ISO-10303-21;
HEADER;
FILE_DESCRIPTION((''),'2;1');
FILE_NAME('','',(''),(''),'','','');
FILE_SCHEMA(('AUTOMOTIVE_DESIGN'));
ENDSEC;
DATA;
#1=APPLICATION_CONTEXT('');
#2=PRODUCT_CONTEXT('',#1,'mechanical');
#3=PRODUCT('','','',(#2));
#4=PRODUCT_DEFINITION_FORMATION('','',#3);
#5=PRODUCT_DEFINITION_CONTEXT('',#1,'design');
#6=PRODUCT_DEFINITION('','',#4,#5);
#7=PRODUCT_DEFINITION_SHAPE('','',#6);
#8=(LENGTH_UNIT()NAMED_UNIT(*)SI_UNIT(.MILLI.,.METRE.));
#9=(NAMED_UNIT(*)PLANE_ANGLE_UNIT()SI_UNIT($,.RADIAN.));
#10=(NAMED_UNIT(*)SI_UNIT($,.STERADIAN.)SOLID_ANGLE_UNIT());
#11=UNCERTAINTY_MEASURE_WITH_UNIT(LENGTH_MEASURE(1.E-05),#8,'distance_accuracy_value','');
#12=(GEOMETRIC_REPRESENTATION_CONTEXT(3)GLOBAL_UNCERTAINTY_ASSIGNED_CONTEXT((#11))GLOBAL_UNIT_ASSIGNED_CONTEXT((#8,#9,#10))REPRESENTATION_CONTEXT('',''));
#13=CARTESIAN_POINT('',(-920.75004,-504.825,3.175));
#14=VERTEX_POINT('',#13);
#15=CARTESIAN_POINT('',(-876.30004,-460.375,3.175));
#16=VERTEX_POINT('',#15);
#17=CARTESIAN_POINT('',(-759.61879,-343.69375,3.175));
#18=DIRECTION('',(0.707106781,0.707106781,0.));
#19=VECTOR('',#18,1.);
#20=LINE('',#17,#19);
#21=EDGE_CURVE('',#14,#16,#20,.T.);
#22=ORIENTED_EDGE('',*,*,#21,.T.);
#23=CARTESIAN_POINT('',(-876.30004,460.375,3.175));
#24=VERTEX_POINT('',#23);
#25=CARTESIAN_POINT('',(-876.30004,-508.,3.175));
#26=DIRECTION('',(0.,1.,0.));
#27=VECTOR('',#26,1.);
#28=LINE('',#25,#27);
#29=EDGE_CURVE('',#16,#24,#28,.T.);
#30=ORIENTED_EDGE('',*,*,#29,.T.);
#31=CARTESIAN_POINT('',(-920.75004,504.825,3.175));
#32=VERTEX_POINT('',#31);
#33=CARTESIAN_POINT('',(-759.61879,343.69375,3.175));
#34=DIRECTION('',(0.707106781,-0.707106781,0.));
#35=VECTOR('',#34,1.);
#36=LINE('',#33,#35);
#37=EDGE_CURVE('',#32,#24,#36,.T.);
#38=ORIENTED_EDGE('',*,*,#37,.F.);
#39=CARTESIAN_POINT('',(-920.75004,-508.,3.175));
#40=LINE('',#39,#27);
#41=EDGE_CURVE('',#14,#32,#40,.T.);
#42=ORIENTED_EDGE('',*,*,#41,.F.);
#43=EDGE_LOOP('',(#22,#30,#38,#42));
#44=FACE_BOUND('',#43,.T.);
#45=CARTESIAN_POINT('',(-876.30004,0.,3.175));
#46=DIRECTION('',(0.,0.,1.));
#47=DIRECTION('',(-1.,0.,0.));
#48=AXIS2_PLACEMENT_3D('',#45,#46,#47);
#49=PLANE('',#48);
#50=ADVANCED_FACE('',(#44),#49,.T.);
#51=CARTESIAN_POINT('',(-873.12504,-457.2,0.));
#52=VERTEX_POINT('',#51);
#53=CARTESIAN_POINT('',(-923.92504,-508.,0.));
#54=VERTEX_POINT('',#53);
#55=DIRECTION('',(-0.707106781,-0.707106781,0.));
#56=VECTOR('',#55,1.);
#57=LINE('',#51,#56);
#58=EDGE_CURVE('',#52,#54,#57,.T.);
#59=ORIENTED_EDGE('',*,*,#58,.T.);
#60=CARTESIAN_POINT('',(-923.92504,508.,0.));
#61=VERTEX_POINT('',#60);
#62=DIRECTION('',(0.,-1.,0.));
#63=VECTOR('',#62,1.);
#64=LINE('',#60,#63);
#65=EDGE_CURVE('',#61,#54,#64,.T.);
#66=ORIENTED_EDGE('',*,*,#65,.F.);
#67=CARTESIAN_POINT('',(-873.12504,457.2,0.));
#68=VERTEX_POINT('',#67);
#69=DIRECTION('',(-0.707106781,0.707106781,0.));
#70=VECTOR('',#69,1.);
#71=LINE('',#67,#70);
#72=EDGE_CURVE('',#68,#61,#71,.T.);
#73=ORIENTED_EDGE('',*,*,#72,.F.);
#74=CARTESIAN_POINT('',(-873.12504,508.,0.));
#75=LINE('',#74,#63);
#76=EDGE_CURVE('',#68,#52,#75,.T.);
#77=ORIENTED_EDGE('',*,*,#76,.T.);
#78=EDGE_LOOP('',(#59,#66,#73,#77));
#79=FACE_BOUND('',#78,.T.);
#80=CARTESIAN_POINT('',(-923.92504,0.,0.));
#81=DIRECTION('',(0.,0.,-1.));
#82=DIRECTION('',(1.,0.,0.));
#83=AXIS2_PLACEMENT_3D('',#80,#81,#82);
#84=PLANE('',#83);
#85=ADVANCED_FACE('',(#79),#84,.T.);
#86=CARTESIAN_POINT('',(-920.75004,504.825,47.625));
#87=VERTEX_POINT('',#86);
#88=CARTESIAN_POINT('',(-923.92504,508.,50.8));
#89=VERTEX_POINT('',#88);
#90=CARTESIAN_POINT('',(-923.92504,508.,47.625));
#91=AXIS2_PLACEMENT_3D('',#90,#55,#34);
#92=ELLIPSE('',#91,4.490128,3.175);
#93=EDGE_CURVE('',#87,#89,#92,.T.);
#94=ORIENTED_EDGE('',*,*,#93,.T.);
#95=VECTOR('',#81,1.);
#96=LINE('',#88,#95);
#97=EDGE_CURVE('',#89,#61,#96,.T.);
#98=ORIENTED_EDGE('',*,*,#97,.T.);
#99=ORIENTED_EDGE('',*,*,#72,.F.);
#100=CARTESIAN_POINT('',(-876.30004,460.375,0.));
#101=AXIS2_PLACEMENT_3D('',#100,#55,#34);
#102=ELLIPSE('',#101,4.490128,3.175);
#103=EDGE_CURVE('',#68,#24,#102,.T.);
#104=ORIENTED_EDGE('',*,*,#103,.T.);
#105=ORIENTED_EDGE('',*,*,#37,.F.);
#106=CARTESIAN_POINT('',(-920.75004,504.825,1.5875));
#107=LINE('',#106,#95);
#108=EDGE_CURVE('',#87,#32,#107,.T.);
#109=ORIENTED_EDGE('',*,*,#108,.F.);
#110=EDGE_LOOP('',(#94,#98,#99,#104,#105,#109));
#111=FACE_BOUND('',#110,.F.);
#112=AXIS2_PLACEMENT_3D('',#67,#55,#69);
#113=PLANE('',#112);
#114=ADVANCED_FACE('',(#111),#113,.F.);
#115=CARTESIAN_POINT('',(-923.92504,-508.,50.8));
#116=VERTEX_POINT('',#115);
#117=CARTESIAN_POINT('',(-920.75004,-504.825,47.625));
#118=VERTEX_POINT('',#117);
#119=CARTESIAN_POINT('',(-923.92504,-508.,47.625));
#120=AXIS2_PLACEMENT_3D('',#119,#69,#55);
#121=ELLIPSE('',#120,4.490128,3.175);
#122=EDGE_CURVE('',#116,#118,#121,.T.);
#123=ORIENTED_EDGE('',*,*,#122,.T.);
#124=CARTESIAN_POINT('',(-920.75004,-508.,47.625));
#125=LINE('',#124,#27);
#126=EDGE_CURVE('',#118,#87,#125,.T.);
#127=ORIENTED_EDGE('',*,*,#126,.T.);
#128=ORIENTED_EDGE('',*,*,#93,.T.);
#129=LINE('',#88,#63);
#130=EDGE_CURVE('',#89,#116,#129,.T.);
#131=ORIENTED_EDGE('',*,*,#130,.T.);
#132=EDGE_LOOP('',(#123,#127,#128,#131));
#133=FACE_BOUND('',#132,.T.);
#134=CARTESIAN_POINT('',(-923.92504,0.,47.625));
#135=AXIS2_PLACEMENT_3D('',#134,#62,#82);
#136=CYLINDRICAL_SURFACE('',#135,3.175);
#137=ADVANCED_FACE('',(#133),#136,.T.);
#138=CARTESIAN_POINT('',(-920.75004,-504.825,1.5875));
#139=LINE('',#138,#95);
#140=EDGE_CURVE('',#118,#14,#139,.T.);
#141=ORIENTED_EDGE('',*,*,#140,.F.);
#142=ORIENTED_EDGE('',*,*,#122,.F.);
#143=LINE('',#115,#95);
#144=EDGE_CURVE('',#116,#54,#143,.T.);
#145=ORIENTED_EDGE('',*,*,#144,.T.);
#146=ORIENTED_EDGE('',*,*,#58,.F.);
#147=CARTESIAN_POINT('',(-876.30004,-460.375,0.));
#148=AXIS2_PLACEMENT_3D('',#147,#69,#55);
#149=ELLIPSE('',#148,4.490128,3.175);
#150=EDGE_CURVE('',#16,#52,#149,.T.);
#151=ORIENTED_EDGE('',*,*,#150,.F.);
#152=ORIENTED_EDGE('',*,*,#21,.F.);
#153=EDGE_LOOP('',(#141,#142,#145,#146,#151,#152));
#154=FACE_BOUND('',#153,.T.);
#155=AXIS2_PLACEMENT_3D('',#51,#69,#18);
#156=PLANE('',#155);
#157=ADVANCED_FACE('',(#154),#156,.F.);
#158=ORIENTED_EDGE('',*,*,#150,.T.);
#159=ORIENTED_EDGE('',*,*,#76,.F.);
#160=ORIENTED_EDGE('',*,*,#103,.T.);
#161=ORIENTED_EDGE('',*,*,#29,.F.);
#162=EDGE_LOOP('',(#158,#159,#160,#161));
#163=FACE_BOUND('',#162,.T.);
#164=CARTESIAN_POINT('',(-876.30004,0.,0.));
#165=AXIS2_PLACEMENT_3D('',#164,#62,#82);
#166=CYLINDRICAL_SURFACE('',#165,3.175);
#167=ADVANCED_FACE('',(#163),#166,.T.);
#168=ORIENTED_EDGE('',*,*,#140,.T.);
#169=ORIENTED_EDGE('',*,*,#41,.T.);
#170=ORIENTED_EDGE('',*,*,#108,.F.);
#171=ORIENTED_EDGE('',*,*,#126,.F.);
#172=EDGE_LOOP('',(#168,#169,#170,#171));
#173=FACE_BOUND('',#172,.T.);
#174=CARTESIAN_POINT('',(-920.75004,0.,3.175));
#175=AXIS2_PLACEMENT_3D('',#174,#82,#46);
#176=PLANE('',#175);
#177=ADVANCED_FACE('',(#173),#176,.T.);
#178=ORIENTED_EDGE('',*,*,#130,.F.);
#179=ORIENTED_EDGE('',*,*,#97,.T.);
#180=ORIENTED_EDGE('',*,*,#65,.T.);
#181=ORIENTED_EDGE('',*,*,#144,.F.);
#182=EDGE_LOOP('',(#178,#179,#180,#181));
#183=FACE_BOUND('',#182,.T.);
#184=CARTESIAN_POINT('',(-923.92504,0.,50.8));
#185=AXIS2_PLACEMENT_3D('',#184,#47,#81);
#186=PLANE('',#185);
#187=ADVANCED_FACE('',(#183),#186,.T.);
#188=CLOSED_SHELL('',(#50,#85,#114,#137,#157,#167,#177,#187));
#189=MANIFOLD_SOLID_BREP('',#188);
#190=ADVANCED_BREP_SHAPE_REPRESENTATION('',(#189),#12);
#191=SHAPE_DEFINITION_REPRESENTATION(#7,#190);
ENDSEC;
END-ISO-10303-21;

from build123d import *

# Parameters (mm, degrees)
F1_DEPTH = 508
F3_DEPTH = 50.8


# Not quite as in the source:
# - a pattern or mirror of a feature is missing from the dataset's text; its kind, count and spacing are read off the source's solid


with BuildPart() as f1:
    # F0 (on Front) → F1 (new body, symmetric)
    with BuildSketch(Plane.XZ):
        with BuildLine():
            ThreePointArc((-920.7500404358, 47.625), (-921.6799764055, 49.8700640303), (-923.9250404358, 50.8))
            Line((-923.9250404358, 50.8), (-923.9250404358, 0))
            Line((-923.9250404358, 0), (-873.1250404358, 0))
            ThreePointArc((-873.1250404358, 0), (-874.0549764055, 2.2450640303), (-876.3000404358, 3.175))
            Line((-876.3000404358, 3.175), (-920.7500404358, 3.175))
            Line((-920.7500404358, 3.175), (-920.7500404358, 47.625))
        make_face()
    extrude(amount=F1_DEPTH, both=True)

    # F2 (on face) → F3 (cut)
    with BuildSketch(Plane(origin=(0, 0, 0), x_dir=(1, 0, 0), z_dir=(0, 0, -1))):
        Polygon((-873.1250404358, -457.2), (-923.9250404358, -508), (-873.1250404358, -508), align=None)
    f3 = extrude(amount=-F3_DEPTH, mode=Mode.SUBTRACT)

    # F3_copies: F3 across plane
    add(f3.mirror(Plane(origin=(0, 0, 0), x_dir=(0, 0, -1), z_dir=(0, -1, 0))), mode=Mode.SUBTRACT)


solid = f1.part
